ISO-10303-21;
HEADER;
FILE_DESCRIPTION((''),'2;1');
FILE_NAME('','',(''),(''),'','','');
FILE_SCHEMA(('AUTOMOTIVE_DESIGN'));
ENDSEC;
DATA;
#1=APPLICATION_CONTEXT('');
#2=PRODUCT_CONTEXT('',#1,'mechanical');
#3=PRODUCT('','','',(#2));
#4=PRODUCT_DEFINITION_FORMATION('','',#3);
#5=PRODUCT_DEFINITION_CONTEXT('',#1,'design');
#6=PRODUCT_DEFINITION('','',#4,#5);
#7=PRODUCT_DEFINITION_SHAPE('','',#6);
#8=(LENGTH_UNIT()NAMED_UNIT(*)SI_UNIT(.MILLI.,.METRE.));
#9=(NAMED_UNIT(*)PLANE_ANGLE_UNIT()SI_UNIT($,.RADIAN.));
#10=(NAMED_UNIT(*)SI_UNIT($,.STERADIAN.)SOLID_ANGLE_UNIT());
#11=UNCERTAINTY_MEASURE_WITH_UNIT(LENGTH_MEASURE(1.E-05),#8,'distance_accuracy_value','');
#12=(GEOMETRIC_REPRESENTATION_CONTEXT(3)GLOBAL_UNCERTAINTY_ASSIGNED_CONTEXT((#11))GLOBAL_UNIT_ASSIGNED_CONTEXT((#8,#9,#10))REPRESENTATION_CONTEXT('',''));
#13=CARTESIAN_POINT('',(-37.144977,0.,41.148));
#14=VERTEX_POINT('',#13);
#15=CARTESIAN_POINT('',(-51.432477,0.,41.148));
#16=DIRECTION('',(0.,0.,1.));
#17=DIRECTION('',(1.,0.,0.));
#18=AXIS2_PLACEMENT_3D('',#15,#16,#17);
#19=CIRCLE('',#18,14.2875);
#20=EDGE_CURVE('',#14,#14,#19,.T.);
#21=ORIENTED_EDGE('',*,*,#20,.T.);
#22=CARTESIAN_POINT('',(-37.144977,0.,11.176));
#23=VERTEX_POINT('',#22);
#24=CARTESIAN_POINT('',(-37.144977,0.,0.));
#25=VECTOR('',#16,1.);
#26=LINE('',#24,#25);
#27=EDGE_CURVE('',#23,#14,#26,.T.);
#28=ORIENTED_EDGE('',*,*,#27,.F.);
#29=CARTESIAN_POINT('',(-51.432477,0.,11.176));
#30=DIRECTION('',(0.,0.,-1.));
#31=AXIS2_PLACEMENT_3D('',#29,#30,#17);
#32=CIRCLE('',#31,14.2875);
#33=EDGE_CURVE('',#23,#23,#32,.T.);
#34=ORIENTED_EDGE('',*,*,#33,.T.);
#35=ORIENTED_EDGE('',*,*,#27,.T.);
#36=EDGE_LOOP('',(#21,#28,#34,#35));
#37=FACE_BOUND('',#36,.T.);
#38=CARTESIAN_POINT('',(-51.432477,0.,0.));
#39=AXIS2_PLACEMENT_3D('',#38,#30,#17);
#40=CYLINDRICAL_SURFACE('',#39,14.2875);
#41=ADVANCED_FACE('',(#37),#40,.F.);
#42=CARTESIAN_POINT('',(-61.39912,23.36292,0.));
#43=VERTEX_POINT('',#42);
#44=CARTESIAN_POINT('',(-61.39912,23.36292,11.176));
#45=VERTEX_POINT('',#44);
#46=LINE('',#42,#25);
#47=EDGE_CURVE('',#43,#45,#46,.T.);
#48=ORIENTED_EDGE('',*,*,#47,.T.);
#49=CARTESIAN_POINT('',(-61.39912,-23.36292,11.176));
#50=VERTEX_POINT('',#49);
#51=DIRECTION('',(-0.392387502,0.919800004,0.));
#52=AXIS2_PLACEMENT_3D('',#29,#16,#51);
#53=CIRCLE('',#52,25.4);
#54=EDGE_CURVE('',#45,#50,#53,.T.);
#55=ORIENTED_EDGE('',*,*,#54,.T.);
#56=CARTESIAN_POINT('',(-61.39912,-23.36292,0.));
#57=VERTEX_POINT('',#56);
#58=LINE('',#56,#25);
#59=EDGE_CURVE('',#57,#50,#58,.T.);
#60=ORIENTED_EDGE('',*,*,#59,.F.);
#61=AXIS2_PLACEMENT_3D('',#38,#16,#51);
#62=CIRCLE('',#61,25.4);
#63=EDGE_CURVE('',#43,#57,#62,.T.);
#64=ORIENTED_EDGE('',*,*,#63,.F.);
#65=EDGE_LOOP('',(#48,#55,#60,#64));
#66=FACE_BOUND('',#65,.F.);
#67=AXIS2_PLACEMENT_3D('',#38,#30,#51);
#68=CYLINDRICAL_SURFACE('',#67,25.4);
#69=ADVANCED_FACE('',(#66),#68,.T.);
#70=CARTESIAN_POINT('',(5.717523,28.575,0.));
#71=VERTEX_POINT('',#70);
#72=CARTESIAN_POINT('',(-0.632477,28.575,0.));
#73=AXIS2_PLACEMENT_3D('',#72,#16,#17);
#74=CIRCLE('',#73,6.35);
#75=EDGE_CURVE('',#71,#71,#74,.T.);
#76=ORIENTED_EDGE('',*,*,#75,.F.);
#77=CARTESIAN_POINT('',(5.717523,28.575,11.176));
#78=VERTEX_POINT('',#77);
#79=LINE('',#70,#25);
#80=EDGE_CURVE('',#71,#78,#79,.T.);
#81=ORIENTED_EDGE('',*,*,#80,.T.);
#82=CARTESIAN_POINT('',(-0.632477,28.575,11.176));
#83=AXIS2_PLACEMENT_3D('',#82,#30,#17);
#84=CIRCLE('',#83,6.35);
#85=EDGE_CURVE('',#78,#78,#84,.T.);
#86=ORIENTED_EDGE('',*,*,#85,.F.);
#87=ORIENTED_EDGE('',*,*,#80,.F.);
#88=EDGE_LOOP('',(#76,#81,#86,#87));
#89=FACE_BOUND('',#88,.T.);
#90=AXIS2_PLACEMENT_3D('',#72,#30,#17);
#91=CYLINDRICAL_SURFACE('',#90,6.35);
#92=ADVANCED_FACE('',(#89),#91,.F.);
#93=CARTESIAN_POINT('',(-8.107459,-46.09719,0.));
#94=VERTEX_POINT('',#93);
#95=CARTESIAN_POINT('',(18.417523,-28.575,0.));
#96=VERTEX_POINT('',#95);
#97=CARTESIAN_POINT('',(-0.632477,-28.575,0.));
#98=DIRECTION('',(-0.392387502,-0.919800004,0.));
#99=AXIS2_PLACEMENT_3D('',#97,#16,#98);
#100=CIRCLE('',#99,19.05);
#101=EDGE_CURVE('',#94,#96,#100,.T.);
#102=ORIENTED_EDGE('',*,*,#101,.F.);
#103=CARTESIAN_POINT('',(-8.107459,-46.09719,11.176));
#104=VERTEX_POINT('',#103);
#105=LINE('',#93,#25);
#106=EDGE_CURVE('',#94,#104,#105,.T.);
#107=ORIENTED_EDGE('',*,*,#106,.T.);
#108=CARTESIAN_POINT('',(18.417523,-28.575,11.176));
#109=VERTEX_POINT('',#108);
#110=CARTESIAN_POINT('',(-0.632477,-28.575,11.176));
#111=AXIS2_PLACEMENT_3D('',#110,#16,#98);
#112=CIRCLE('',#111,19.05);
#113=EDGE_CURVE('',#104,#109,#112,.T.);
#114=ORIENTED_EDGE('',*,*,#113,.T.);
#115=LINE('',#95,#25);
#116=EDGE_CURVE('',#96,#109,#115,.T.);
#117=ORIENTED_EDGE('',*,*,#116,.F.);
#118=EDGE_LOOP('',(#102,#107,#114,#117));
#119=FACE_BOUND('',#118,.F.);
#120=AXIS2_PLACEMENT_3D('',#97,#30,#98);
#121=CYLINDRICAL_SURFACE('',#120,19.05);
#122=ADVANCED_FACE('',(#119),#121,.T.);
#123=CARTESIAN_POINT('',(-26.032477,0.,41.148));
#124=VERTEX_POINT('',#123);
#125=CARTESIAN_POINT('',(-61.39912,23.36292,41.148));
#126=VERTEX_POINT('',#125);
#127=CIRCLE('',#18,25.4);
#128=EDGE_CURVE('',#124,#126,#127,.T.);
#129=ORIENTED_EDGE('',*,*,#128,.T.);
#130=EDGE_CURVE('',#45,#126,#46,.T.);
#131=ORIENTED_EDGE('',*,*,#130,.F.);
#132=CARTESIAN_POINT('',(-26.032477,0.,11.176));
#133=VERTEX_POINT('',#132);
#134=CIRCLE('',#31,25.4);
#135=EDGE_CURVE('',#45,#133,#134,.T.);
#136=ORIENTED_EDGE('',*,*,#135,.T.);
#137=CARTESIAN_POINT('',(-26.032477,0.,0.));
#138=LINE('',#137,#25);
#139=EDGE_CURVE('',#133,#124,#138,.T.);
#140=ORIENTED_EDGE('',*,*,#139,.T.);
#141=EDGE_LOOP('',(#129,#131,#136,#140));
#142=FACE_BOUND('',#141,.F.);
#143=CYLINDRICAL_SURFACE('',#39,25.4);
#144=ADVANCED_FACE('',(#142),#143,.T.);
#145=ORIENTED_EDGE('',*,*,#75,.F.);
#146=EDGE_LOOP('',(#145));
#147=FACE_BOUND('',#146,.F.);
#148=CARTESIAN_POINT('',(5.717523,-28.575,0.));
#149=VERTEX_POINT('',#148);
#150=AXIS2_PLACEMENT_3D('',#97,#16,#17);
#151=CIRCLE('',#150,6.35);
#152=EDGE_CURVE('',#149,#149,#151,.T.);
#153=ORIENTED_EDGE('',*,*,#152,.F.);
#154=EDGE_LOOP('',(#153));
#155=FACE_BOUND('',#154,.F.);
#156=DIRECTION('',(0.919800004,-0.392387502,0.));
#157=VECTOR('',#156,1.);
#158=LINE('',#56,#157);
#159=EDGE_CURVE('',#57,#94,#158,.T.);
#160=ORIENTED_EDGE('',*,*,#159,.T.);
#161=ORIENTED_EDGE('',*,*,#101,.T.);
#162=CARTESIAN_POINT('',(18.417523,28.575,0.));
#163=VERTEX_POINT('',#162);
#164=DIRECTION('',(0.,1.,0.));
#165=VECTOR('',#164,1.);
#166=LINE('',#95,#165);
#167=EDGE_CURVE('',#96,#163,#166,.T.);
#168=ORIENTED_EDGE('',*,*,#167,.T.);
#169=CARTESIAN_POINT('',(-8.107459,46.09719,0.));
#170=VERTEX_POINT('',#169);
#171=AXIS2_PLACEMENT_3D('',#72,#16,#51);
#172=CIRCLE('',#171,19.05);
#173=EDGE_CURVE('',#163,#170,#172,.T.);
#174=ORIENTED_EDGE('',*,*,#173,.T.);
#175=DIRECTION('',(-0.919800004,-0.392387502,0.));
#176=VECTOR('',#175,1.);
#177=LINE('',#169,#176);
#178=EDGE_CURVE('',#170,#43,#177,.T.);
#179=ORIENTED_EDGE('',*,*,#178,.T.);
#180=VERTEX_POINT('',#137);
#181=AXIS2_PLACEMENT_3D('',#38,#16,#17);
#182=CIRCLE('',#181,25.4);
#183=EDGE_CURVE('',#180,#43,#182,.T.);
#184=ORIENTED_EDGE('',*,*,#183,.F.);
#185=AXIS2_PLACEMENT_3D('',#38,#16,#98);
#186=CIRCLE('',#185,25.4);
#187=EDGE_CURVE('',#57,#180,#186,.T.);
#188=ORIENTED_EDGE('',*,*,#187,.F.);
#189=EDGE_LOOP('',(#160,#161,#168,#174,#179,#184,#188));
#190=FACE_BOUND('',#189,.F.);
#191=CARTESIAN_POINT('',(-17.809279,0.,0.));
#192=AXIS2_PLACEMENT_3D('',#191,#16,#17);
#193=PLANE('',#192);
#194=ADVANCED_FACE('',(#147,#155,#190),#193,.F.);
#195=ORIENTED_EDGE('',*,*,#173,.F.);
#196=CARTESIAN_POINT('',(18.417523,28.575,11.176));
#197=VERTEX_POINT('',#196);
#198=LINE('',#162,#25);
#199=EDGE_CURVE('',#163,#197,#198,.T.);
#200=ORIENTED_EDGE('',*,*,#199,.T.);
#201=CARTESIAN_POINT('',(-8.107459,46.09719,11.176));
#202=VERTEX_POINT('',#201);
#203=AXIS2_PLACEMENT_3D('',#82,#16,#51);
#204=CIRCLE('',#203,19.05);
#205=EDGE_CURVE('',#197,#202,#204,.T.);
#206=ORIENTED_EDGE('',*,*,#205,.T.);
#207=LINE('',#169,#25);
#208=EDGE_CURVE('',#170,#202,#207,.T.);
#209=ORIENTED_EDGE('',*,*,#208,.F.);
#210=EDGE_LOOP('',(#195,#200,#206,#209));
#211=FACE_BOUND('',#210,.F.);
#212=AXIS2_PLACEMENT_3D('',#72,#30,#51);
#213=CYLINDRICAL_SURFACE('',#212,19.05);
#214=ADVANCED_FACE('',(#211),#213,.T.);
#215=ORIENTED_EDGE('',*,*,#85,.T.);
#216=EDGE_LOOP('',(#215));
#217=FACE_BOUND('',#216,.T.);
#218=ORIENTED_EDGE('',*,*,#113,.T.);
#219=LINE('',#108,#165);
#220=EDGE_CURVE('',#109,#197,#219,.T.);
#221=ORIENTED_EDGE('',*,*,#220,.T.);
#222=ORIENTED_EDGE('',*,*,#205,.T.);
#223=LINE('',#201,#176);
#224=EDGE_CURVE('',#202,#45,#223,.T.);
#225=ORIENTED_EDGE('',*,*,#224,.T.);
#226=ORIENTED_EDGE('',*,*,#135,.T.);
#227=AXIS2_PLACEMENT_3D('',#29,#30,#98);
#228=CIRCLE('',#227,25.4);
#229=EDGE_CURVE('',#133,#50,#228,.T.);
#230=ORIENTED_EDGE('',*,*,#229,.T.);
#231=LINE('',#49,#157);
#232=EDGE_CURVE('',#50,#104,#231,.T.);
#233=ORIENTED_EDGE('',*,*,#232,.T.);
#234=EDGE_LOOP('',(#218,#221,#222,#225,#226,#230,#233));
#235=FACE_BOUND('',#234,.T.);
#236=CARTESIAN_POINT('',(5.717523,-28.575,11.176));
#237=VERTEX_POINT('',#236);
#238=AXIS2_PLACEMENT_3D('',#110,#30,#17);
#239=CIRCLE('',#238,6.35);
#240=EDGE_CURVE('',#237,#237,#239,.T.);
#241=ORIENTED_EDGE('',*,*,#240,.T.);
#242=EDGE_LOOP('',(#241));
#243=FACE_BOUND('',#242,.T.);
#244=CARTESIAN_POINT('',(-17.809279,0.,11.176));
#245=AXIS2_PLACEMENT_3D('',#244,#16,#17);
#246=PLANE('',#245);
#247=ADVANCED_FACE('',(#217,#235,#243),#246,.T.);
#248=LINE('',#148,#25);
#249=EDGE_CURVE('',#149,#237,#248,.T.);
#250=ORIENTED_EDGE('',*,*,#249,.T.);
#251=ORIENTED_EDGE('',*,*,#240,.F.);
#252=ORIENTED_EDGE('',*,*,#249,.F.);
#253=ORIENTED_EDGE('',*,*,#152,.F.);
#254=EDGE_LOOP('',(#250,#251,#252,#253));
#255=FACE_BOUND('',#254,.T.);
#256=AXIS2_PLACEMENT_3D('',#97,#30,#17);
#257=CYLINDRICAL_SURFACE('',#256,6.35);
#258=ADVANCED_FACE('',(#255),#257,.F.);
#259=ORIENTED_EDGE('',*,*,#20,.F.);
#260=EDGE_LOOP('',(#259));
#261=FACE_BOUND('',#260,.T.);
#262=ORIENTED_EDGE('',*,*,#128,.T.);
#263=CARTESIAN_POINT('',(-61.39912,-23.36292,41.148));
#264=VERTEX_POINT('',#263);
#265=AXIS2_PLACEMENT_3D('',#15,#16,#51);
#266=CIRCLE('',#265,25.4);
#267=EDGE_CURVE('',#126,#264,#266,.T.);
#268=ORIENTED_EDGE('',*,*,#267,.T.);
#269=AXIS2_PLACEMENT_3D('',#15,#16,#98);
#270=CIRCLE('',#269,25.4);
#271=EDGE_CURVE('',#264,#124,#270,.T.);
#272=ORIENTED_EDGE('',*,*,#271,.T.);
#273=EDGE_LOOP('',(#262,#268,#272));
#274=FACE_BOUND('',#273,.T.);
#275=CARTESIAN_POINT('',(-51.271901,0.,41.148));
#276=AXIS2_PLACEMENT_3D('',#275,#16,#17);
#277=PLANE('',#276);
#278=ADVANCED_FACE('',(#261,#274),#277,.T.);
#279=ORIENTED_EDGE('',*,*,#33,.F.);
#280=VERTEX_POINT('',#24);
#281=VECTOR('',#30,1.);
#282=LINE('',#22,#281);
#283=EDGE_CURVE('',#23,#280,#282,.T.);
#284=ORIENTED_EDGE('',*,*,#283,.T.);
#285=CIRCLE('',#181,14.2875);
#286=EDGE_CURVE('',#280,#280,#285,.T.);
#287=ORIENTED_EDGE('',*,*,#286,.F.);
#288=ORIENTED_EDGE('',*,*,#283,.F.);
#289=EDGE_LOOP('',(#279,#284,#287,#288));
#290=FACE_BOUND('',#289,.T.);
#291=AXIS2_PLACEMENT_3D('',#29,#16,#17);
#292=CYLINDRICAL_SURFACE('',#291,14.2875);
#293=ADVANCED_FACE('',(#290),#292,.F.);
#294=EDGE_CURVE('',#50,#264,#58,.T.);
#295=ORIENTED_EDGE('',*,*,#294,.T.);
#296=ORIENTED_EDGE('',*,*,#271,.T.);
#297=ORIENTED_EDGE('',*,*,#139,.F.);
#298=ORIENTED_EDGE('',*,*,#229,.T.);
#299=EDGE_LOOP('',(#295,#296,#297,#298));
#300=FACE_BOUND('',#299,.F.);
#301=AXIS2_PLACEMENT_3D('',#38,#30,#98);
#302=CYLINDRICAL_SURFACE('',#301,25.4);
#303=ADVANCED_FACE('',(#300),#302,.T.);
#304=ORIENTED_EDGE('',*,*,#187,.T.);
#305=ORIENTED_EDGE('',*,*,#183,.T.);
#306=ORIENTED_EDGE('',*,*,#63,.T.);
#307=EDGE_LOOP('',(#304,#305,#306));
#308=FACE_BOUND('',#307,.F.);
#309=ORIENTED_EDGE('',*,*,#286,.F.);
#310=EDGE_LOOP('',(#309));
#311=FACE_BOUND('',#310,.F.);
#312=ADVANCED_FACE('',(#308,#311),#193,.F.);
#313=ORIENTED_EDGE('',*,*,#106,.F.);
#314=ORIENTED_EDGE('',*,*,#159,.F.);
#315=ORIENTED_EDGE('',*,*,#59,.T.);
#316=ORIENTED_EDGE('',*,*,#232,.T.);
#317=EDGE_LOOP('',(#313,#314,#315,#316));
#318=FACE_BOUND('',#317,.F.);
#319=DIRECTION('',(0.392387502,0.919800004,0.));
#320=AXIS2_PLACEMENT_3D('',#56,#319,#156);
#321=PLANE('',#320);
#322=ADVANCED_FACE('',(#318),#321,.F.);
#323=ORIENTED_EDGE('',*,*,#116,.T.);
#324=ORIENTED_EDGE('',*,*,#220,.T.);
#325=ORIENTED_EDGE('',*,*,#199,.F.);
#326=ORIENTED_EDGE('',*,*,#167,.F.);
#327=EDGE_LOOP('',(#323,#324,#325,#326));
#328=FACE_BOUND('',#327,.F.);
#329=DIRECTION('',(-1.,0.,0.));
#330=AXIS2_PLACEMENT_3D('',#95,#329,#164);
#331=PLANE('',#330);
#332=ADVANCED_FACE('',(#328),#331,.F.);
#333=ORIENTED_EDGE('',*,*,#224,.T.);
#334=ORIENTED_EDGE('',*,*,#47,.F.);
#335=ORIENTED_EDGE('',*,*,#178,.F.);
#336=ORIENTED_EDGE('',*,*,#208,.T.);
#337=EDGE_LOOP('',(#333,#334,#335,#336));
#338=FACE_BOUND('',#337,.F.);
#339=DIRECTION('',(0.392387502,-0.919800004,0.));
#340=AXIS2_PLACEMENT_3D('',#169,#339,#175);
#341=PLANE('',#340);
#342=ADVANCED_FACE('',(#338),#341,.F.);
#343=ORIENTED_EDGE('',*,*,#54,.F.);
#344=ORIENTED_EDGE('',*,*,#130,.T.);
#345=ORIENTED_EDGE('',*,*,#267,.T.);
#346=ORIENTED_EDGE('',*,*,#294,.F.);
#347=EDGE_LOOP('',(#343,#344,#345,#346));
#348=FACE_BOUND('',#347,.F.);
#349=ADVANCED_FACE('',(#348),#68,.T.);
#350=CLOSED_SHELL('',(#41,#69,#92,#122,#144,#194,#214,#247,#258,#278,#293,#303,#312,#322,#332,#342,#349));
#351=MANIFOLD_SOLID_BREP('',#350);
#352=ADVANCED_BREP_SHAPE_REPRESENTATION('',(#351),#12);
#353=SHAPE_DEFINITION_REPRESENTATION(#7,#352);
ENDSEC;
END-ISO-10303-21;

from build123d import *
from build123d import SkipClean  # not in build123d's __all__

# Parameters (mm, degrees)
F0_R     = 14.2875
F0_R_2   = 6.35
F1_DEPTH = 11.176
F2_DEPTH = 41.148
F3_DEPTH = 11.177
F4_DEPTH = 41.149


with BuildPart() as f1:
    # F0 (on Top) → F1 (new body)
    with BuildSketch(Plane.XY):
        with BuildLine():
            ThreePointArc((-61.399120046, 23.3629201096), (-37.4323475039, 21.1933093342), (-26.0324774843, 0))
            ThreePointArc((-26.0324774843, 0), (-37.4323475039, -21.1933093342), (-61.399120046, -23.3629201096))
            Line((-61.399120046, -23.3629201096), (-8.1074594056, -46.0971900822))
            ThreePointArc((-8.1074594056, -46.0971900822), (-11.1325749696, -12.6800179994), (18.4175225157, -28.575))
            Line((18.4175225157, -28.575), (18.4175225157, 28.575))
            ThreePointArc((18.4175225157, 28.575), (-11.1325749696, 12.6800179994), (-8.1074594056, 46.0971900822))
            Line((-8.1074594056, 46.0971900822), (-61.399120046, 23.3629201096))
        make_face()
        with BuildLine():
            ThreePointArc((-61.399120046, -23.3629201096), (-37.4323475039, -21.1933093342), (-26.0324774843, 0))
            ThreePointArc((-26.0324774843, 0), (-37.4323475039, 21.1933093342), (-61.399120046, 23.3629201096))
            ThreePointArc((-61.399120046, 23.3629201096), (-76.8324774843, 0), (-61.399120046, -23.3629201096))
        make_face()
        with Locations((-51.4324774843, 0)):
            Circle(F0_R, mode=Mode.SUBTRACT)
        with BuildLine():
            ThreePointArc((18.4175225157, 28.575), (9.867620001, 44.4699820006), (-8.1074594056, 46.0971900822))
            ThreePointArc((-8.1074594056, 46.0971900822), (-11.1325749696, 12.6800179994), (18.4175225157, 28.575))
        make_face()
        with Locations((-0.6324774843, 28.575)):
            Circle(F0_R_2, mode=Mode.SUBTRACT)
        with BuildLine():
            ThreePointArc((18.4175225157, -28.575), (-11.1325749696, -12.6800179994), (-8.1074594056, -46.0971900822))
            ThreePointArc((-8.1074594056, -46.0971900822), (9.867620001, -44.4699820006), (18.4175225157, -28.575))
        make_face()
        with Locations((-0.6324774843, -28.575)):
            Circle(F0_R_2, mode=Mode.SUBTRACT)
        with Locations((-51.4324774843, 0)):
            Circle(F0_R)
        with Locations((-0.6324774843, -28.575)):
            Circle(F0_R_2)
        with Locations((-0.6324774843, 28.575)):
            Circle(F0_R_2)
    extrude(amount=F1_DEPTH)

    # F0 (on Top) → F2 (join)
    with BuildSketch(Plane.XY):
        with BuildLine():
            ThreePointArc((-61.399120046, -23.3629201096), (-37.4323475039, -21.1933093342), (-26.0324774843, 0))
            ThreePointArc((-26.0324774843, 0), (-37.4323475039, 21.1933093342), (-61.399120046, 23.3629201096))
            ThreePointArc((-61.399120046, 23.3629201096), (-76.8324774843, 0), (-61.399120046, -23.3629201096))
        make_face()
        with Locations((-51.4324774843, 0)):
            Circle(F0_R, mode=Mode.SUBTRACT)
    with SkipClean():  # cleaning this boolean's faces spoils the solid; the shape is the same uncleaned
        extrude(amount=F2_DEPTH)

    # F3 (cut, through all): a face of the model
    f3_faces = [f1.faces().sort_by_distance(p)[0] for p in [
        (-51.4324774843, 0, 11.176),
    ]]
    with SkipClean():  # cleaning this boolean's faces spoils the solid; the shape is the same uncleaned
        extrude(f3_faces, amount=-F3_DEPTH, mode=Mode.SUBTRACT)

    # F0 (on Top) → F4 (cut, through all)
    with BuildSketch(Plane.XY):
        with Locations((-0.6324774843, 28.575)):
            Circle(F0_R_2)
        with Locations((-0.6324774843, -28.575)):
            Circle(F0_R_2)
    with SkipClean():  # cleaning this boolean's faces spoils the solid; the shape is the same uncleaned
        extrude(amount=F4_DEPTH, mode=Mode.SUBTRACT)


solid = f1.part
